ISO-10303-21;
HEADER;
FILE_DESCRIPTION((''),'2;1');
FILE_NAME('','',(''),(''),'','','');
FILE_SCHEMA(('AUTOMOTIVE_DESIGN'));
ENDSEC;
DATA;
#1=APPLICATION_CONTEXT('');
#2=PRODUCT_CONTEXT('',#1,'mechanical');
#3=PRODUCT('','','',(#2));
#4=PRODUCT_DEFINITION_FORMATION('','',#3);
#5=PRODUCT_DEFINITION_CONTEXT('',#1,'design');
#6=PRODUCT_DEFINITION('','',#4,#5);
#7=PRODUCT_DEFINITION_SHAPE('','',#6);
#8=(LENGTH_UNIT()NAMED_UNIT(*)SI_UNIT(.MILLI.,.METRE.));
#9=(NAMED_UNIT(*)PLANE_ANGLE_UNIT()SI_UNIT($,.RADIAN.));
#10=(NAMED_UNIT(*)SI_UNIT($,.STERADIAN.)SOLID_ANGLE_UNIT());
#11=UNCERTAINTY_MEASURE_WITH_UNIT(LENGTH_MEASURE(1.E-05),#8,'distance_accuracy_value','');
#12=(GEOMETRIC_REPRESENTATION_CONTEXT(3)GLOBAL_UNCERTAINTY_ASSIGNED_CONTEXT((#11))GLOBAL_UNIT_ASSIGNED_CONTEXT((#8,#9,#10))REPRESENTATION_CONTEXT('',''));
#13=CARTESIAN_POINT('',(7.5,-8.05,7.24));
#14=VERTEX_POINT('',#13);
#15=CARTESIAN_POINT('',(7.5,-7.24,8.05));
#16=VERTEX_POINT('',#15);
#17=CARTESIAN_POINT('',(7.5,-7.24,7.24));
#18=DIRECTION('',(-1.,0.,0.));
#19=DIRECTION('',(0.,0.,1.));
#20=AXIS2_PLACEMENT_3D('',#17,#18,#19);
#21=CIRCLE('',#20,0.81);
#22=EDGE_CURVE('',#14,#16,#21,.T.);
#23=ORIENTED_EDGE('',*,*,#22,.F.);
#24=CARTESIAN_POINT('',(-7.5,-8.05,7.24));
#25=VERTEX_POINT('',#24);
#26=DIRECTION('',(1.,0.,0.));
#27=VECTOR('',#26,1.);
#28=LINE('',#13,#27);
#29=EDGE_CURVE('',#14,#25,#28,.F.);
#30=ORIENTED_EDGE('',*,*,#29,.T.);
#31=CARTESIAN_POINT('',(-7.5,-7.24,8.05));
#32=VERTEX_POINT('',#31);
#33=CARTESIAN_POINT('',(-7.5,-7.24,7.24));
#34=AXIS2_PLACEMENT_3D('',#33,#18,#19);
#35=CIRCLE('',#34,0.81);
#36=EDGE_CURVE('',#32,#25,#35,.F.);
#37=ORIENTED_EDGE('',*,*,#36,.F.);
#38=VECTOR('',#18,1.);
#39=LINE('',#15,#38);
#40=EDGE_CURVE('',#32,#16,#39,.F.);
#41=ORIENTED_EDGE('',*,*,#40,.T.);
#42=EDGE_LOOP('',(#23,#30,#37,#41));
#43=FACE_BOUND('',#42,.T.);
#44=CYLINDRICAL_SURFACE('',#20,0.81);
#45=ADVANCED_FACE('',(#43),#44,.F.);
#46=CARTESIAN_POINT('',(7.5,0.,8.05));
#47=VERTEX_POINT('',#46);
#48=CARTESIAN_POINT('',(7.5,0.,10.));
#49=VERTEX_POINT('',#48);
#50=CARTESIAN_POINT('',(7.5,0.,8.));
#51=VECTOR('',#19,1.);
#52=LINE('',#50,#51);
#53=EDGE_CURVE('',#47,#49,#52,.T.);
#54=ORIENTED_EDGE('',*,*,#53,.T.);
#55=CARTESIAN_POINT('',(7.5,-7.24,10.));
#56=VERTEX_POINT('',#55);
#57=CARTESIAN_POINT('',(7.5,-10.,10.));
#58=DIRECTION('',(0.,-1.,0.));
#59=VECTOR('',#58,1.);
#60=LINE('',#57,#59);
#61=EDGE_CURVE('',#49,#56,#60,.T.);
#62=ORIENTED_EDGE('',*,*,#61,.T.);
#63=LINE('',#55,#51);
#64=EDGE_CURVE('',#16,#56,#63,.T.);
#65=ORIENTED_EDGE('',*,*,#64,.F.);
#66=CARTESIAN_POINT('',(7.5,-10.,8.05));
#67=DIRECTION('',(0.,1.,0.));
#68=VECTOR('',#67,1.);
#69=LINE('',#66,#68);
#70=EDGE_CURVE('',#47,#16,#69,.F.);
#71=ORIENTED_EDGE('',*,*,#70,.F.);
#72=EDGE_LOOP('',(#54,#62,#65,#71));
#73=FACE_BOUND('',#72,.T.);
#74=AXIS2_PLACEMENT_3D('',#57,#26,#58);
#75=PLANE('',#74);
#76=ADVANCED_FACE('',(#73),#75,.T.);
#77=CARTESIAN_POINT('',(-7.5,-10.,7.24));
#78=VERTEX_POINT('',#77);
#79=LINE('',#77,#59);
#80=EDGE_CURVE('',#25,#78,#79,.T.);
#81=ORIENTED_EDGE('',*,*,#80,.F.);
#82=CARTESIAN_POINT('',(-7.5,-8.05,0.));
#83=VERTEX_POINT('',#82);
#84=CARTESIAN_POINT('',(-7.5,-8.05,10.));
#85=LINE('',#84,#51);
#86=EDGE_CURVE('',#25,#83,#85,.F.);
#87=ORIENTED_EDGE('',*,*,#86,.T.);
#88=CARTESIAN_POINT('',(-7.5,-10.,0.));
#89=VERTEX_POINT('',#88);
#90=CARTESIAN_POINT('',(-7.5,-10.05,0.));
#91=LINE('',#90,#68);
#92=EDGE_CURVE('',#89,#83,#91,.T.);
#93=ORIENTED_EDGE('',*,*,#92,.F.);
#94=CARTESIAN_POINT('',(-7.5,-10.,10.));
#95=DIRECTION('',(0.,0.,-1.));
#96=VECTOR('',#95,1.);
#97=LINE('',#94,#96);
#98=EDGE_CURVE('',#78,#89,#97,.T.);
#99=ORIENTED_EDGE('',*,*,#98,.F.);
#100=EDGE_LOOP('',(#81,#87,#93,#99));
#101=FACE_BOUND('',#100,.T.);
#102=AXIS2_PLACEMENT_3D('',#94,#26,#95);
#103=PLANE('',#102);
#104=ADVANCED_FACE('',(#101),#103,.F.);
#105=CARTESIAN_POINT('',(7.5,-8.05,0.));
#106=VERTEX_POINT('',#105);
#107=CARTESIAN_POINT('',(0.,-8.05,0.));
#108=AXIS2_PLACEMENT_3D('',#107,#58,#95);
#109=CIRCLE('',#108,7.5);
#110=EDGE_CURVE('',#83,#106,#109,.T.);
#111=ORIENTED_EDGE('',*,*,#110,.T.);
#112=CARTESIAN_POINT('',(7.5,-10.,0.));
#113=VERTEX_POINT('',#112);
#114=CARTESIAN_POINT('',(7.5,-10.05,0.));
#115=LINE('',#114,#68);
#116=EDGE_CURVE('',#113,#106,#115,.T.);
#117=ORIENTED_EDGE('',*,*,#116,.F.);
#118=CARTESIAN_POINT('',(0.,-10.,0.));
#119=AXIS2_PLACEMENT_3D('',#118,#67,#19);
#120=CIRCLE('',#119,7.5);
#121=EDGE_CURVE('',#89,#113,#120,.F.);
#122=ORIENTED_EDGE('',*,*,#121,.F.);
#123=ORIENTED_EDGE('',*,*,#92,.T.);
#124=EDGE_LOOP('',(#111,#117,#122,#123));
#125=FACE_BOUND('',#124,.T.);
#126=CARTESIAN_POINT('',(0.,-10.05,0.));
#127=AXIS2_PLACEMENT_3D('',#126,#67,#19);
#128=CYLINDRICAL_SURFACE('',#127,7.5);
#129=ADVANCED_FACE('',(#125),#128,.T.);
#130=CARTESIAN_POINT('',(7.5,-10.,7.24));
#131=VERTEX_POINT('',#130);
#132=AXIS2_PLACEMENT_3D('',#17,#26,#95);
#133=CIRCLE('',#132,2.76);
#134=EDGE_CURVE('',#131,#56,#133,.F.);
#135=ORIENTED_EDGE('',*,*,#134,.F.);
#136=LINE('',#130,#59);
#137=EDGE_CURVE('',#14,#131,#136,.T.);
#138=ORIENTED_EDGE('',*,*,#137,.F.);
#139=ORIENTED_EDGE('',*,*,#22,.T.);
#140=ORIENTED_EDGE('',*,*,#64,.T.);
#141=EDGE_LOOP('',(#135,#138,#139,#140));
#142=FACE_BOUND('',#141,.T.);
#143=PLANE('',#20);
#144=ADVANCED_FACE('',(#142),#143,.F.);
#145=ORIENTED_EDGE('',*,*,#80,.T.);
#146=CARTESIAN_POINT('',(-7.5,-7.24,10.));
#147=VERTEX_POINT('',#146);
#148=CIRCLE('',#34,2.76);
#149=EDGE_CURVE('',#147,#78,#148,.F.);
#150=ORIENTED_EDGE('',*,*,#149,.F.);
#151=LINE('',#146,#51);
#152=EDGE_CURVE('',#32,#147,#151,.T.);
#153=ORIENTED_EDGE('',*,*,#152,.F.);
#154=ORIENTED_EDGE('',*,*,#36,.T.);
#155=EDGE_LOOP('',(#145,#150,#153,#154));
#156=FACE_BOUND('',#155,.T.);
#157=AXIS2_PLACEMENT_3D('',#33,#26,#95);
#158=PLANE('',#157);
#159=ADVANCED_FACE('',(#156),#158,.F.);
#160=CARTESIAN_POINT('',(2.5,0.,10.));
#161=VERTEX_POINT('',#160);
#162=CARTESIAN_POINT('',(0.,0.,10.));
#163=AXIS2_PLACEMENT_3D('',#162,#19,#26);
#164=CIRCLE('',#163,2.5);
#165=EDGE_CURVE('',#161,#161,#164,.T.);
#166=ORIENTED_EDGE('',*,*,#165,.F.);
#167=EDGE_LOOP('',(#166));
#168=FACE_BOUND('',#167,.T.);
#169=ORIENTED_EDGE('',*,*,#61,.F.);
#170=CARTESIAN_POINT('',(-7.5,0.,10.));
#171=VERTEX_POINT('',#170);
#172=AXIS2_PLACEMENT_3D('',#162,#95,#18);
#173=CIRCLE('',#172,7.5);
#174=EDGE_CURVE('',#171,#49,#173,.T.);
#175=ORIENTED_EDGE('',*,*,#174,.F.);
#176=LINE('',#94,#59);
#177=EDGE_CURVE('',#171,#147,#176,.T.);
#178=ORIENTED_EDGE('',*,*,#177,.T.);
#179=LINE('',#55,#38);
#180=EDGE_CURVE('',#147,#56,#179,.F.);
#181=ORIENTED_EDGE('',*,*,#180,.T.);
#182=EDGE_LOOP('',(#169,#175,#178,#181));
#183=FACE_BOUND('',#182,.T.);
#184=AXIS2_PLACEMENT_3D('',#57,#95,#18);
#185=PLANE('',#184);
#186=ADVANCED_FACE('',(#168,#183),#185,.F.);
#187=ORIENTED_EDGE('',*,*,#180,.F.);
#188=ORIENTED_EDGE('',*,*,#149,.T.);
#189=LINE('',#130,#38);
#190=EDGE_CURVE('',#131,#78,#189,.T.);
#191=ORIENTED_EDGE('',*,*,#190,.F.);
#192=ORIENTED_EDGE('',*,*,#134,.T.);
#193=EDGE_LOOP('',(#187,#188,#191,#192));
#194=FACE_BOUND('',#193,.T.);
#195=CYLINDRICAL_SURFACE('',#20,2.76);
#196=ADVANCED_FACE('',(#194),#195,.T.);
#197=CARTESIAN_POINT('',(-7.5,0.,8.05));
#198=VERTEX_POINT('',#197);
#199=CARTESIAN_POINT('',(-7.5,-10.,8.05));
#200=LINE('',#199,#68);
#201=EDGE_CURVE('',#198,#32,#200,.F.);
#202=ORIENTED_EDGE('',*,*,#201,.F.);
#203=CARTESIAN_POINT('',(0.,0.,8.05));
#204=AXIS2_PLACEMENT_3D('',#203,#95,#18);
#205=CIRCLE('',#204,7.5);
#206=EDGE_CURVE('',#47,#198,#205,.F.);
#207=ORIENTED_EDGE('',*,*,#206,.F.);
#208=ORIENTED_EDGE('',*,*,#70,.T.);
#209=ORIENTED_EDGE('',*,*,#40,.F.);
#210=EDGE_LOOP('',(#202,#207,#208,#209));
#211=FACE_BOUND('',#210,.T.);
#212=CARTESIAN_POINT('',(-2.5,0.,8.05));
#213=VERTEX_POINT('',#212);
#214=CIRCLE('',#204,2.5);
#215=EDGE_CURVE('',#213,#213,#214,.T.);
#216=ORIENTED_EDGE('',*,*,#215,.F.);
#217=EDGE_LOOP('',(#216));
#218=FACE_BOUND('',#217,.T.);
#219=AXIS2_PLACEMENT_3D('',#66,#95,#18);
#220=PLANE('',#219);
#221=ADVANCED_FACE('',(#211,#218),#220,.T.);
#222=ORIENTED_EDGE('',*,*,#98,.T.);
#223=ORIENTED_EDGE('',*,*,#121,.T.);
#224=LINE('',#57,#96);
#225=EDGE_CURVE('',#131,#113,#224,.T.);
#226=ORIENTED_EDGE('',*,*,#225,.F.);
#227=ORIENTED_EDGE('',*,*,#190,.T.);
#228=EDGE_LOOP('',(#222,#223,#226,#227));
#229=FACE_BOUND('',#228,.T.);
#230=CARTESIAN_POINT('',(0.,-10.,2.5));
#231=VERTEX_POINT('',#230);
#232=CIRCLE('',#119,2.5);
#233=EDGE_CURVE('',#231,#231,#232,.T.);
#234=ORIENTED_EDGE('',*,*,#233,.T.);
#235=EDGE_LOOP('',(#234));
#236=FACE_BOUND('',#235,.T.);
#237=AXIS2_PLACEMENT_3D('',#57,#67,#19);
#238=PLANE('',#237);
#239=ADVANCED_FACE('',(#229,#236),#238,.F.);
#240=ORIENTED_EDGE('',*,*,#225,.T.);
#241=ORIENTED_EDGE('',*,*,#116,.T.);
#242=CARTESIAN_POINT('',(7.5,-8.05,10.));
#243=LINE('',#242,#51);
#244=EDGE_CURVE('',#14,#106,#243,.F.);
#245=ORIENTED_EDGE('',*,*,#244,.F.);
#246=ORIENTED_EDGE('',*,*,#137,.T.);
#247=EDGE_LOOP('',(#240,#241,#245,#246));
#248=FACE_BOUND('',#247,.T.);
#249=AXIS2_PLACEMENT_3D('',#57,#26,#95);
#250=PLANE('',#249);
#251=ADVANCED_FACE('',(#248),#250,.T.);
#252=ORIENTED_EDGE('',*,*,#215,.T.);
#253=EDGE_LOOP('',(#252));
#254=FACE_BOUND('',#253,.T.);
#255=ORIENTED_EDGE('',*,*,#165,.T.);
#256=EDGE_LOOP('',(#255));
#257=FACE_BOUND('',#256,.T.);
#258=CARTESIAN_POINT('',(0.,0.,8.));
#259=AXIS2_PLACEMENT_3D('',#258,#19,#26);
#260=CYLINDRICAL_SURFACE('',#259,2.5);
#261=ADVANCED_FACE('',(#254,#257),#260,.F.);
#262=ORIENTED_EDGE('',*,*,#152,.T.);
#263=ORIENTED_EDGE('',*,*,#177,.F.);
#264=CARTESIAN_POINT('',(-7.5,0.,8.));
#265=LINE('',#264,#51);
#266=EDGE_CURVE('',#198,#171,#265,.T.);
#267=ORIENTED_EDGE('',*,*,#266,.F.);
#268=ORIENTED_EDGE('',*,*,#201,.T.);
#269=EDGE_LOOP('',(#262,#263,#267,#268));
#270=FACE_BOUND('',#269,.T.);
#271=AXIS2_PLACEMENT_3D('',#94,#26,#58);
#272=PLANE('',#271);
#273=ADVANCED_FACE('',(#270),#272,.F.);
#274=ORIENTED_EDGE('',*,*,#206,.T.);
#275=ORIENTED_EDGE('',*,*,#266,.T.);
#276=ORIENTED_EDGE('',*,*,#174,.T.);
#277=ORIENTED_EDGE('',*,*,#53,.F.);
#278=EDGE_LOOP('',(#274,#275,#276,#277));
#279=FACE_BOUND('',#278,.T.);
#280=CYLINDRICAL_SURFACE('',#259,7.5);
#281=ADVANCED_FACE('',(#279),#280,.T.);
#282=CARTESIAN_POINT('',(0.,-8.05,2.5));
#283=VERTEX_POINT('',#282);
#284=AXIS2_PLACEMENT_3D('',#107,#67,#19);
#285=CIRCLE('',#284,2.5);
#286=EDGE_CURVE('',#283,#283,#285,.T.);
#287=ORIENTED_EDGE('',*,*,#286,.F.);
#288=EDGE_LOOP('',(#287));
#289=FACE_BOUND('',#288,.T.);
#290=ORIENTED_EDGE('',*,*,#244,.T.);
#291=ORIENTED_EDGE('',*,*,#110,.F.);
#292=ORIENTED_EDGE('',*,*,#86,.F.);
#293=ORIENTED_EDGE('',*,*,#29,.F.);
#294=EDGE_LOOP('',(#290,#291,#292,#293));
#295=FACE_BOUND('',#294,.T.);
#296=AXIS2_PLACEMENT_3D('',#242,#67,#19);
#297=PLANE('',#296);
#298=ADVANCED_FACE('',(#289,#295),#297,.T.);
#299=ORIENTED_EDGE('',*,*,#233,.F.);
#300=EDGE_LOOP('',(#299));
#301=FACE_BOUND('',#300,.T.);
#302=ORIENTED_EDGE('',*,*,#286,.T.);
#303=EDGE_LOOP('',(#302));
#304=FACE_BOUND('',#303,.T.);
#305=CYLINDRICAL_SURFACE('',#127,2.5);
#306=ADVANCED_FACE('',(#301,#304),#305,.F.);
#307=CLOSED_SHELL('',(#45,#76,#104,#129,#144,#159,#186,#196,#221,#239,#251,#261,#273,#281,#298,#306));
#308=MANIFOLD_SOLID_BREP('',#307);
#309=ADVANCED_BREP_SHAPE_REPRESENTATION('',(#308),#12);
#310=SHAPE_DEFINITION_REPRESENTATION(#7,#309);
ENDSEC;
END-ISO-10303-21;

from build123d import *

# Parameters (mm, degrees)
RESSALTO_EXTRUS_O1_DEPTH  = 7.5
CONVERTER_S_LIDO1_START   = -7.5
CONVERTER_S_LIDO1_DEPTH   = 15
CONVERTER_S_LIDO1_2_DEPTH = 15
ESBO_O6_R                 = 2.5
CORTE_EXTRUS_O1_DEPTH     = 2
ESBO_O7_R                 = 2.5
CORTE_EXTRUS_O2_DEPTH     = 2


# Read off the part's stored shape, not the designer's step: Converter-Sólido1
with BuildPart() as part:
    # Esboço1 → Ressalto-extrusão1 (new, symmetric)
    with BuildSketch(Plane(origin=(0, 0, 0), x_dir=(0, 0, -1), z_dir=(1, 0, 0))):
        Polygon((-8, 10), (-8, -8), (10, -8), (10, -10), (-10, -10), (-10, 10), align=None)
    extrude(amount=RESSALTO_EXTRUS_O1_DEPTH, both=True)

    # Converter-Sólido1 outline → Converter-Sólido1 (cut)
    with BuildSketch(Plane.YZ.offset(CONVERTER_S_LIDO1_START)):
        with BuildLine():
            Line((-10, 10), (-10, 7.24))
            ThreePointArc((-10, 7.24), (-9.191614716, 9.191614716), (-7.24, 10))
            Line((-7.24, 10), (-10, 10))
        make_face()
        with BuildLine():
            Line((-8.05, 7.24), (-8.05, -10))
            Line((-8.05, -10), (-8, -10))
            Line((-8, -10), (-8, 7.520178515))
            ThreePointArc((-8, 7.520178515), (-8.037402032, 7.382302495), (-8.05, 7.24))
        make_face()
        with BuildLine():
            Line((10, 8), (10, 8.05))
            Line((10, 8.05), (-7.24, 8.05))
            ThreePointArc((-7.24, 8.05), (-7.382302495, 8.037402032), (-7.520178515, 8))
            Line((-7.520178515, 8), (10, 8))
        make_face()
    extrude(amount=CONVERTER_S_LIDO1_DEPTH, mode=Mode.SUBTRACT)

    # Converter-S_lido1 2 outline → Converter-S_lido1 2 (add)
    with BuildSketch(Plane.YZ.offset(CONVERTER_S_LIDO1_START)):
        with BuildLine():
            Line((-8, 8), (-8, 7.520178515))
            ThreePointArc((-8, 7.520178515), (-7.812756493, 7.812756493), (-7.520178515, 8))
            Line((-7.520178515, 8), (-8, 8))
        make_face()
    extrude(amount=CONVERTER_S_LIDO1_2_DEPTH)

    # Esboço6 → Corte-extrusão1 (cut)
    with BuildSketch(Plane.XY.offset(10)):
        Circle(ESBO_O6_R)
        with BuildLine():
            Line((-7.5, 0), (-7.5, 10))
            Line((-7.5, 10), (7.5, 10))
            Line((7.5, 10), (7.5, 0))
            ThreePointArc((7.5, 0), (0, 7.5), (-7.5, 0))
        make_face()
    extrude(amount=-CORTE_EXTRUS_O1_DEPTH, mode=Mode.SUBTRACT)

    # Esboço7 → Corte-extrusão2 (cut)
    with BuildSketch(Plane(origin=(0, -8.05, 0), x_dir=(1, 0, 0), z_dir=(0, 1, 0))):
        with Locations(Location((0, 0, 0), (0, 0, 270))):
            Circle(ESBO_O7_R)
        with BuildLine():
            Line((7.5, 0), (7.5, 10))
            Line((7.5, 10), (-7.5, 10))
            Line((-7.5, 10), (-7.5, 0))
            ThreePointArc((-7.5, 0), (0, 7.5), (7.5, 0))
        make_face()
    extrude(amount=-CORTE_EXTRUS_O2_DEPTH, mode=Mode.SUBTRACT)


solid = part.part
